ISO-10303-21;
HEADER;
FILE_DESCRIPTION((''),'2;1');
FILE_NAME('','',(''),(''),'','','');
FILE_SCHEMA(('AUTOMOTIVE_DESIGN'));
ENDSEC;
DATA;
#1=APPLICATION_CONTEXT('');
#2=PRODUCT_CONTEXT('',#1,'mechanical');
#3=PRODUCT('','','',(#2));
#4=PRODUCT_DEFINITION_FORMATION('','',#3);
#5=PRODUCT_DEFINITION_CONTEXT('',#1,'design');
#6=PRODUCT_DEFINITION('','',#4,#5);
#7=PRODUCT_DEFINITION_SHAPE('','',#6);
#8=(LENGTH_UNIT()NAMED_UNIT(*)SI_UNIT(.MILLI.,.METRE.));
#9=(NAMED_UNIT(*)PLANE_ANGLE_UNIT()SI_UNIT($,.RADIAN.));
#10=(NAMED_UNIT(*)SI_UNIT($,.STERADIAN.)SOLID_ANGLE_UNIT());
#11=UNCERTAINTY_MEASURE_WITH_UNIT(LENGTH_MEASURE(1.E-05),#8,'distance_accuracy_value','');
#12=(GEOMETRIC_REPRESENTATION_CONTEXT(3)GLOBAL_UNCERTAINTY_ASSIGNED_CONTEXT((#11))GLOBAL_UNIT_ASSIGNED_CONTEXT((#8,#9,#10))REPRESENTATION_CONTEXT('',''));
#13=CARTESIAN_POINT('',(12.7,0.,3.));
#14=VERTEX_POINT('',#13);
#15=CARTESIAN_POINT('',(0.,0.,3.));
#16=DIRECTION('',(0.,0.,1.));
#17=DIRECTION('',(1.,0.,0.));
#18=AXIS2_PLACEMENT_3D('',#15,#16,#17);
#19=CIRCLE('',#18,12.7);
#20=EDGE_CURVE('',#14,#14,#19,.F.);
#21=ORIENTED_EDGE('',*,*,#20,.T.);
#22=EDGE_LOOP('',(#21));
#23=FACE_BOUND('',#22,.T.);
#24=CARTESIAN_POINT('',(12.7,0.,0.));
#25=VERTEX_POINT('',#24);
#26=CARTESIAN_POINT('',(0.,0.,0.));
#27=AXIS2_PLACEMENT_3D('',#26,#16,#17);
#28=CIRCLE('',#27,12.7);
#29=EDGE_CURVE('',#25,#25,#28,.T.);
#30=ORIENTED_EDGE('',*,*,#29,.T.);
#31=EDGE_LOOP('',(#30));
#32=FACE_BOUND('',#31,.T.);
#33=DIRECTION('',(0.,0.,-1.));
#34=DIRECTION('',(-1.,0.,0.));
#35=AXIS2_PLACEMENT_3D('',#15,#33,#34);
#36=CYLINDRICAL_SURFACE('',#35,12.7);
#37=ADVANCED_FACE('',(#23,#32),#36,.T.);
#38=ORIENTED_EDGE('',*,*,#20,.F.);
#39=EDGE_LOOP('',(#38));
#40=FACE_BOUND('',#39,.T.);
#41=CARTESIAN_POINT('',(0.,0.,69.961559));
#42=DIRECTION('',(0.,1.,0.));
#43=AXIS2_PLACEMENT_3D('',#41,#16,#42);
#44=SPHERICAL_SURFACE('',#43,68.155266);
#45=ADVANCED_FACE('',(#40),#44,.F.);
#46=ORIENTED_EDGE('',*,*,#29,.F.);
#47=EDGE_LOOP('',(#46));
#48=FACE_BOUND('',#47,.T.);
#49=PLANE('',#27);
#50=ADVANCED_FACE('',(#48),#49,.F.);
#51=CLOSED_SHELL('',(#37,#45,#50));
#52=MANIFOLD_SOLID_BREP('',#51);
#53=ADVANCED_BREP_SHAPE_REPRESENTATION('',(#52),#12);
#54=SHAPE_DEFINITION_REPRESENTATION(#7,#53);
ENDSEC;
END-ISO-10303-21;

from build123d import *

# Parameters (mm, degrees)
SKETCH_1_R      = 12.7
EXTRUDE_1_DEPTH = 3


with BuildPart() as part:
    # 草图1 → 凸台-拉伸1 (new body)
    with BuildSketch(Plane.XY):
        Circle(SKETCH_1_R)
    extrude(amount=EXTRUDE_1_DEPTH)

    # 草图2 → 切除-旋转4 (revolve, cut)
    with BuildSketch(Plane(origin=(0, 0, 0), x_dir=(0, 0, -1), z_dir=(1, 0, 0))):
        with BuildLine():
            Line((-69.961558507, 0), (-1.806292256, 0))
            ThreePointArc((-1.806292256, 0), (-69.961558507, 68.155266251), (-138.116824758, 0))
            Line((-138.116824758, 0), (-69.961558507, 0))
        make_face()
    revolve(axis=Axis((0, 0, 1.806292256), (0, 0, -1)), mode=Mode.SUBTRACT)


solid = part.part
